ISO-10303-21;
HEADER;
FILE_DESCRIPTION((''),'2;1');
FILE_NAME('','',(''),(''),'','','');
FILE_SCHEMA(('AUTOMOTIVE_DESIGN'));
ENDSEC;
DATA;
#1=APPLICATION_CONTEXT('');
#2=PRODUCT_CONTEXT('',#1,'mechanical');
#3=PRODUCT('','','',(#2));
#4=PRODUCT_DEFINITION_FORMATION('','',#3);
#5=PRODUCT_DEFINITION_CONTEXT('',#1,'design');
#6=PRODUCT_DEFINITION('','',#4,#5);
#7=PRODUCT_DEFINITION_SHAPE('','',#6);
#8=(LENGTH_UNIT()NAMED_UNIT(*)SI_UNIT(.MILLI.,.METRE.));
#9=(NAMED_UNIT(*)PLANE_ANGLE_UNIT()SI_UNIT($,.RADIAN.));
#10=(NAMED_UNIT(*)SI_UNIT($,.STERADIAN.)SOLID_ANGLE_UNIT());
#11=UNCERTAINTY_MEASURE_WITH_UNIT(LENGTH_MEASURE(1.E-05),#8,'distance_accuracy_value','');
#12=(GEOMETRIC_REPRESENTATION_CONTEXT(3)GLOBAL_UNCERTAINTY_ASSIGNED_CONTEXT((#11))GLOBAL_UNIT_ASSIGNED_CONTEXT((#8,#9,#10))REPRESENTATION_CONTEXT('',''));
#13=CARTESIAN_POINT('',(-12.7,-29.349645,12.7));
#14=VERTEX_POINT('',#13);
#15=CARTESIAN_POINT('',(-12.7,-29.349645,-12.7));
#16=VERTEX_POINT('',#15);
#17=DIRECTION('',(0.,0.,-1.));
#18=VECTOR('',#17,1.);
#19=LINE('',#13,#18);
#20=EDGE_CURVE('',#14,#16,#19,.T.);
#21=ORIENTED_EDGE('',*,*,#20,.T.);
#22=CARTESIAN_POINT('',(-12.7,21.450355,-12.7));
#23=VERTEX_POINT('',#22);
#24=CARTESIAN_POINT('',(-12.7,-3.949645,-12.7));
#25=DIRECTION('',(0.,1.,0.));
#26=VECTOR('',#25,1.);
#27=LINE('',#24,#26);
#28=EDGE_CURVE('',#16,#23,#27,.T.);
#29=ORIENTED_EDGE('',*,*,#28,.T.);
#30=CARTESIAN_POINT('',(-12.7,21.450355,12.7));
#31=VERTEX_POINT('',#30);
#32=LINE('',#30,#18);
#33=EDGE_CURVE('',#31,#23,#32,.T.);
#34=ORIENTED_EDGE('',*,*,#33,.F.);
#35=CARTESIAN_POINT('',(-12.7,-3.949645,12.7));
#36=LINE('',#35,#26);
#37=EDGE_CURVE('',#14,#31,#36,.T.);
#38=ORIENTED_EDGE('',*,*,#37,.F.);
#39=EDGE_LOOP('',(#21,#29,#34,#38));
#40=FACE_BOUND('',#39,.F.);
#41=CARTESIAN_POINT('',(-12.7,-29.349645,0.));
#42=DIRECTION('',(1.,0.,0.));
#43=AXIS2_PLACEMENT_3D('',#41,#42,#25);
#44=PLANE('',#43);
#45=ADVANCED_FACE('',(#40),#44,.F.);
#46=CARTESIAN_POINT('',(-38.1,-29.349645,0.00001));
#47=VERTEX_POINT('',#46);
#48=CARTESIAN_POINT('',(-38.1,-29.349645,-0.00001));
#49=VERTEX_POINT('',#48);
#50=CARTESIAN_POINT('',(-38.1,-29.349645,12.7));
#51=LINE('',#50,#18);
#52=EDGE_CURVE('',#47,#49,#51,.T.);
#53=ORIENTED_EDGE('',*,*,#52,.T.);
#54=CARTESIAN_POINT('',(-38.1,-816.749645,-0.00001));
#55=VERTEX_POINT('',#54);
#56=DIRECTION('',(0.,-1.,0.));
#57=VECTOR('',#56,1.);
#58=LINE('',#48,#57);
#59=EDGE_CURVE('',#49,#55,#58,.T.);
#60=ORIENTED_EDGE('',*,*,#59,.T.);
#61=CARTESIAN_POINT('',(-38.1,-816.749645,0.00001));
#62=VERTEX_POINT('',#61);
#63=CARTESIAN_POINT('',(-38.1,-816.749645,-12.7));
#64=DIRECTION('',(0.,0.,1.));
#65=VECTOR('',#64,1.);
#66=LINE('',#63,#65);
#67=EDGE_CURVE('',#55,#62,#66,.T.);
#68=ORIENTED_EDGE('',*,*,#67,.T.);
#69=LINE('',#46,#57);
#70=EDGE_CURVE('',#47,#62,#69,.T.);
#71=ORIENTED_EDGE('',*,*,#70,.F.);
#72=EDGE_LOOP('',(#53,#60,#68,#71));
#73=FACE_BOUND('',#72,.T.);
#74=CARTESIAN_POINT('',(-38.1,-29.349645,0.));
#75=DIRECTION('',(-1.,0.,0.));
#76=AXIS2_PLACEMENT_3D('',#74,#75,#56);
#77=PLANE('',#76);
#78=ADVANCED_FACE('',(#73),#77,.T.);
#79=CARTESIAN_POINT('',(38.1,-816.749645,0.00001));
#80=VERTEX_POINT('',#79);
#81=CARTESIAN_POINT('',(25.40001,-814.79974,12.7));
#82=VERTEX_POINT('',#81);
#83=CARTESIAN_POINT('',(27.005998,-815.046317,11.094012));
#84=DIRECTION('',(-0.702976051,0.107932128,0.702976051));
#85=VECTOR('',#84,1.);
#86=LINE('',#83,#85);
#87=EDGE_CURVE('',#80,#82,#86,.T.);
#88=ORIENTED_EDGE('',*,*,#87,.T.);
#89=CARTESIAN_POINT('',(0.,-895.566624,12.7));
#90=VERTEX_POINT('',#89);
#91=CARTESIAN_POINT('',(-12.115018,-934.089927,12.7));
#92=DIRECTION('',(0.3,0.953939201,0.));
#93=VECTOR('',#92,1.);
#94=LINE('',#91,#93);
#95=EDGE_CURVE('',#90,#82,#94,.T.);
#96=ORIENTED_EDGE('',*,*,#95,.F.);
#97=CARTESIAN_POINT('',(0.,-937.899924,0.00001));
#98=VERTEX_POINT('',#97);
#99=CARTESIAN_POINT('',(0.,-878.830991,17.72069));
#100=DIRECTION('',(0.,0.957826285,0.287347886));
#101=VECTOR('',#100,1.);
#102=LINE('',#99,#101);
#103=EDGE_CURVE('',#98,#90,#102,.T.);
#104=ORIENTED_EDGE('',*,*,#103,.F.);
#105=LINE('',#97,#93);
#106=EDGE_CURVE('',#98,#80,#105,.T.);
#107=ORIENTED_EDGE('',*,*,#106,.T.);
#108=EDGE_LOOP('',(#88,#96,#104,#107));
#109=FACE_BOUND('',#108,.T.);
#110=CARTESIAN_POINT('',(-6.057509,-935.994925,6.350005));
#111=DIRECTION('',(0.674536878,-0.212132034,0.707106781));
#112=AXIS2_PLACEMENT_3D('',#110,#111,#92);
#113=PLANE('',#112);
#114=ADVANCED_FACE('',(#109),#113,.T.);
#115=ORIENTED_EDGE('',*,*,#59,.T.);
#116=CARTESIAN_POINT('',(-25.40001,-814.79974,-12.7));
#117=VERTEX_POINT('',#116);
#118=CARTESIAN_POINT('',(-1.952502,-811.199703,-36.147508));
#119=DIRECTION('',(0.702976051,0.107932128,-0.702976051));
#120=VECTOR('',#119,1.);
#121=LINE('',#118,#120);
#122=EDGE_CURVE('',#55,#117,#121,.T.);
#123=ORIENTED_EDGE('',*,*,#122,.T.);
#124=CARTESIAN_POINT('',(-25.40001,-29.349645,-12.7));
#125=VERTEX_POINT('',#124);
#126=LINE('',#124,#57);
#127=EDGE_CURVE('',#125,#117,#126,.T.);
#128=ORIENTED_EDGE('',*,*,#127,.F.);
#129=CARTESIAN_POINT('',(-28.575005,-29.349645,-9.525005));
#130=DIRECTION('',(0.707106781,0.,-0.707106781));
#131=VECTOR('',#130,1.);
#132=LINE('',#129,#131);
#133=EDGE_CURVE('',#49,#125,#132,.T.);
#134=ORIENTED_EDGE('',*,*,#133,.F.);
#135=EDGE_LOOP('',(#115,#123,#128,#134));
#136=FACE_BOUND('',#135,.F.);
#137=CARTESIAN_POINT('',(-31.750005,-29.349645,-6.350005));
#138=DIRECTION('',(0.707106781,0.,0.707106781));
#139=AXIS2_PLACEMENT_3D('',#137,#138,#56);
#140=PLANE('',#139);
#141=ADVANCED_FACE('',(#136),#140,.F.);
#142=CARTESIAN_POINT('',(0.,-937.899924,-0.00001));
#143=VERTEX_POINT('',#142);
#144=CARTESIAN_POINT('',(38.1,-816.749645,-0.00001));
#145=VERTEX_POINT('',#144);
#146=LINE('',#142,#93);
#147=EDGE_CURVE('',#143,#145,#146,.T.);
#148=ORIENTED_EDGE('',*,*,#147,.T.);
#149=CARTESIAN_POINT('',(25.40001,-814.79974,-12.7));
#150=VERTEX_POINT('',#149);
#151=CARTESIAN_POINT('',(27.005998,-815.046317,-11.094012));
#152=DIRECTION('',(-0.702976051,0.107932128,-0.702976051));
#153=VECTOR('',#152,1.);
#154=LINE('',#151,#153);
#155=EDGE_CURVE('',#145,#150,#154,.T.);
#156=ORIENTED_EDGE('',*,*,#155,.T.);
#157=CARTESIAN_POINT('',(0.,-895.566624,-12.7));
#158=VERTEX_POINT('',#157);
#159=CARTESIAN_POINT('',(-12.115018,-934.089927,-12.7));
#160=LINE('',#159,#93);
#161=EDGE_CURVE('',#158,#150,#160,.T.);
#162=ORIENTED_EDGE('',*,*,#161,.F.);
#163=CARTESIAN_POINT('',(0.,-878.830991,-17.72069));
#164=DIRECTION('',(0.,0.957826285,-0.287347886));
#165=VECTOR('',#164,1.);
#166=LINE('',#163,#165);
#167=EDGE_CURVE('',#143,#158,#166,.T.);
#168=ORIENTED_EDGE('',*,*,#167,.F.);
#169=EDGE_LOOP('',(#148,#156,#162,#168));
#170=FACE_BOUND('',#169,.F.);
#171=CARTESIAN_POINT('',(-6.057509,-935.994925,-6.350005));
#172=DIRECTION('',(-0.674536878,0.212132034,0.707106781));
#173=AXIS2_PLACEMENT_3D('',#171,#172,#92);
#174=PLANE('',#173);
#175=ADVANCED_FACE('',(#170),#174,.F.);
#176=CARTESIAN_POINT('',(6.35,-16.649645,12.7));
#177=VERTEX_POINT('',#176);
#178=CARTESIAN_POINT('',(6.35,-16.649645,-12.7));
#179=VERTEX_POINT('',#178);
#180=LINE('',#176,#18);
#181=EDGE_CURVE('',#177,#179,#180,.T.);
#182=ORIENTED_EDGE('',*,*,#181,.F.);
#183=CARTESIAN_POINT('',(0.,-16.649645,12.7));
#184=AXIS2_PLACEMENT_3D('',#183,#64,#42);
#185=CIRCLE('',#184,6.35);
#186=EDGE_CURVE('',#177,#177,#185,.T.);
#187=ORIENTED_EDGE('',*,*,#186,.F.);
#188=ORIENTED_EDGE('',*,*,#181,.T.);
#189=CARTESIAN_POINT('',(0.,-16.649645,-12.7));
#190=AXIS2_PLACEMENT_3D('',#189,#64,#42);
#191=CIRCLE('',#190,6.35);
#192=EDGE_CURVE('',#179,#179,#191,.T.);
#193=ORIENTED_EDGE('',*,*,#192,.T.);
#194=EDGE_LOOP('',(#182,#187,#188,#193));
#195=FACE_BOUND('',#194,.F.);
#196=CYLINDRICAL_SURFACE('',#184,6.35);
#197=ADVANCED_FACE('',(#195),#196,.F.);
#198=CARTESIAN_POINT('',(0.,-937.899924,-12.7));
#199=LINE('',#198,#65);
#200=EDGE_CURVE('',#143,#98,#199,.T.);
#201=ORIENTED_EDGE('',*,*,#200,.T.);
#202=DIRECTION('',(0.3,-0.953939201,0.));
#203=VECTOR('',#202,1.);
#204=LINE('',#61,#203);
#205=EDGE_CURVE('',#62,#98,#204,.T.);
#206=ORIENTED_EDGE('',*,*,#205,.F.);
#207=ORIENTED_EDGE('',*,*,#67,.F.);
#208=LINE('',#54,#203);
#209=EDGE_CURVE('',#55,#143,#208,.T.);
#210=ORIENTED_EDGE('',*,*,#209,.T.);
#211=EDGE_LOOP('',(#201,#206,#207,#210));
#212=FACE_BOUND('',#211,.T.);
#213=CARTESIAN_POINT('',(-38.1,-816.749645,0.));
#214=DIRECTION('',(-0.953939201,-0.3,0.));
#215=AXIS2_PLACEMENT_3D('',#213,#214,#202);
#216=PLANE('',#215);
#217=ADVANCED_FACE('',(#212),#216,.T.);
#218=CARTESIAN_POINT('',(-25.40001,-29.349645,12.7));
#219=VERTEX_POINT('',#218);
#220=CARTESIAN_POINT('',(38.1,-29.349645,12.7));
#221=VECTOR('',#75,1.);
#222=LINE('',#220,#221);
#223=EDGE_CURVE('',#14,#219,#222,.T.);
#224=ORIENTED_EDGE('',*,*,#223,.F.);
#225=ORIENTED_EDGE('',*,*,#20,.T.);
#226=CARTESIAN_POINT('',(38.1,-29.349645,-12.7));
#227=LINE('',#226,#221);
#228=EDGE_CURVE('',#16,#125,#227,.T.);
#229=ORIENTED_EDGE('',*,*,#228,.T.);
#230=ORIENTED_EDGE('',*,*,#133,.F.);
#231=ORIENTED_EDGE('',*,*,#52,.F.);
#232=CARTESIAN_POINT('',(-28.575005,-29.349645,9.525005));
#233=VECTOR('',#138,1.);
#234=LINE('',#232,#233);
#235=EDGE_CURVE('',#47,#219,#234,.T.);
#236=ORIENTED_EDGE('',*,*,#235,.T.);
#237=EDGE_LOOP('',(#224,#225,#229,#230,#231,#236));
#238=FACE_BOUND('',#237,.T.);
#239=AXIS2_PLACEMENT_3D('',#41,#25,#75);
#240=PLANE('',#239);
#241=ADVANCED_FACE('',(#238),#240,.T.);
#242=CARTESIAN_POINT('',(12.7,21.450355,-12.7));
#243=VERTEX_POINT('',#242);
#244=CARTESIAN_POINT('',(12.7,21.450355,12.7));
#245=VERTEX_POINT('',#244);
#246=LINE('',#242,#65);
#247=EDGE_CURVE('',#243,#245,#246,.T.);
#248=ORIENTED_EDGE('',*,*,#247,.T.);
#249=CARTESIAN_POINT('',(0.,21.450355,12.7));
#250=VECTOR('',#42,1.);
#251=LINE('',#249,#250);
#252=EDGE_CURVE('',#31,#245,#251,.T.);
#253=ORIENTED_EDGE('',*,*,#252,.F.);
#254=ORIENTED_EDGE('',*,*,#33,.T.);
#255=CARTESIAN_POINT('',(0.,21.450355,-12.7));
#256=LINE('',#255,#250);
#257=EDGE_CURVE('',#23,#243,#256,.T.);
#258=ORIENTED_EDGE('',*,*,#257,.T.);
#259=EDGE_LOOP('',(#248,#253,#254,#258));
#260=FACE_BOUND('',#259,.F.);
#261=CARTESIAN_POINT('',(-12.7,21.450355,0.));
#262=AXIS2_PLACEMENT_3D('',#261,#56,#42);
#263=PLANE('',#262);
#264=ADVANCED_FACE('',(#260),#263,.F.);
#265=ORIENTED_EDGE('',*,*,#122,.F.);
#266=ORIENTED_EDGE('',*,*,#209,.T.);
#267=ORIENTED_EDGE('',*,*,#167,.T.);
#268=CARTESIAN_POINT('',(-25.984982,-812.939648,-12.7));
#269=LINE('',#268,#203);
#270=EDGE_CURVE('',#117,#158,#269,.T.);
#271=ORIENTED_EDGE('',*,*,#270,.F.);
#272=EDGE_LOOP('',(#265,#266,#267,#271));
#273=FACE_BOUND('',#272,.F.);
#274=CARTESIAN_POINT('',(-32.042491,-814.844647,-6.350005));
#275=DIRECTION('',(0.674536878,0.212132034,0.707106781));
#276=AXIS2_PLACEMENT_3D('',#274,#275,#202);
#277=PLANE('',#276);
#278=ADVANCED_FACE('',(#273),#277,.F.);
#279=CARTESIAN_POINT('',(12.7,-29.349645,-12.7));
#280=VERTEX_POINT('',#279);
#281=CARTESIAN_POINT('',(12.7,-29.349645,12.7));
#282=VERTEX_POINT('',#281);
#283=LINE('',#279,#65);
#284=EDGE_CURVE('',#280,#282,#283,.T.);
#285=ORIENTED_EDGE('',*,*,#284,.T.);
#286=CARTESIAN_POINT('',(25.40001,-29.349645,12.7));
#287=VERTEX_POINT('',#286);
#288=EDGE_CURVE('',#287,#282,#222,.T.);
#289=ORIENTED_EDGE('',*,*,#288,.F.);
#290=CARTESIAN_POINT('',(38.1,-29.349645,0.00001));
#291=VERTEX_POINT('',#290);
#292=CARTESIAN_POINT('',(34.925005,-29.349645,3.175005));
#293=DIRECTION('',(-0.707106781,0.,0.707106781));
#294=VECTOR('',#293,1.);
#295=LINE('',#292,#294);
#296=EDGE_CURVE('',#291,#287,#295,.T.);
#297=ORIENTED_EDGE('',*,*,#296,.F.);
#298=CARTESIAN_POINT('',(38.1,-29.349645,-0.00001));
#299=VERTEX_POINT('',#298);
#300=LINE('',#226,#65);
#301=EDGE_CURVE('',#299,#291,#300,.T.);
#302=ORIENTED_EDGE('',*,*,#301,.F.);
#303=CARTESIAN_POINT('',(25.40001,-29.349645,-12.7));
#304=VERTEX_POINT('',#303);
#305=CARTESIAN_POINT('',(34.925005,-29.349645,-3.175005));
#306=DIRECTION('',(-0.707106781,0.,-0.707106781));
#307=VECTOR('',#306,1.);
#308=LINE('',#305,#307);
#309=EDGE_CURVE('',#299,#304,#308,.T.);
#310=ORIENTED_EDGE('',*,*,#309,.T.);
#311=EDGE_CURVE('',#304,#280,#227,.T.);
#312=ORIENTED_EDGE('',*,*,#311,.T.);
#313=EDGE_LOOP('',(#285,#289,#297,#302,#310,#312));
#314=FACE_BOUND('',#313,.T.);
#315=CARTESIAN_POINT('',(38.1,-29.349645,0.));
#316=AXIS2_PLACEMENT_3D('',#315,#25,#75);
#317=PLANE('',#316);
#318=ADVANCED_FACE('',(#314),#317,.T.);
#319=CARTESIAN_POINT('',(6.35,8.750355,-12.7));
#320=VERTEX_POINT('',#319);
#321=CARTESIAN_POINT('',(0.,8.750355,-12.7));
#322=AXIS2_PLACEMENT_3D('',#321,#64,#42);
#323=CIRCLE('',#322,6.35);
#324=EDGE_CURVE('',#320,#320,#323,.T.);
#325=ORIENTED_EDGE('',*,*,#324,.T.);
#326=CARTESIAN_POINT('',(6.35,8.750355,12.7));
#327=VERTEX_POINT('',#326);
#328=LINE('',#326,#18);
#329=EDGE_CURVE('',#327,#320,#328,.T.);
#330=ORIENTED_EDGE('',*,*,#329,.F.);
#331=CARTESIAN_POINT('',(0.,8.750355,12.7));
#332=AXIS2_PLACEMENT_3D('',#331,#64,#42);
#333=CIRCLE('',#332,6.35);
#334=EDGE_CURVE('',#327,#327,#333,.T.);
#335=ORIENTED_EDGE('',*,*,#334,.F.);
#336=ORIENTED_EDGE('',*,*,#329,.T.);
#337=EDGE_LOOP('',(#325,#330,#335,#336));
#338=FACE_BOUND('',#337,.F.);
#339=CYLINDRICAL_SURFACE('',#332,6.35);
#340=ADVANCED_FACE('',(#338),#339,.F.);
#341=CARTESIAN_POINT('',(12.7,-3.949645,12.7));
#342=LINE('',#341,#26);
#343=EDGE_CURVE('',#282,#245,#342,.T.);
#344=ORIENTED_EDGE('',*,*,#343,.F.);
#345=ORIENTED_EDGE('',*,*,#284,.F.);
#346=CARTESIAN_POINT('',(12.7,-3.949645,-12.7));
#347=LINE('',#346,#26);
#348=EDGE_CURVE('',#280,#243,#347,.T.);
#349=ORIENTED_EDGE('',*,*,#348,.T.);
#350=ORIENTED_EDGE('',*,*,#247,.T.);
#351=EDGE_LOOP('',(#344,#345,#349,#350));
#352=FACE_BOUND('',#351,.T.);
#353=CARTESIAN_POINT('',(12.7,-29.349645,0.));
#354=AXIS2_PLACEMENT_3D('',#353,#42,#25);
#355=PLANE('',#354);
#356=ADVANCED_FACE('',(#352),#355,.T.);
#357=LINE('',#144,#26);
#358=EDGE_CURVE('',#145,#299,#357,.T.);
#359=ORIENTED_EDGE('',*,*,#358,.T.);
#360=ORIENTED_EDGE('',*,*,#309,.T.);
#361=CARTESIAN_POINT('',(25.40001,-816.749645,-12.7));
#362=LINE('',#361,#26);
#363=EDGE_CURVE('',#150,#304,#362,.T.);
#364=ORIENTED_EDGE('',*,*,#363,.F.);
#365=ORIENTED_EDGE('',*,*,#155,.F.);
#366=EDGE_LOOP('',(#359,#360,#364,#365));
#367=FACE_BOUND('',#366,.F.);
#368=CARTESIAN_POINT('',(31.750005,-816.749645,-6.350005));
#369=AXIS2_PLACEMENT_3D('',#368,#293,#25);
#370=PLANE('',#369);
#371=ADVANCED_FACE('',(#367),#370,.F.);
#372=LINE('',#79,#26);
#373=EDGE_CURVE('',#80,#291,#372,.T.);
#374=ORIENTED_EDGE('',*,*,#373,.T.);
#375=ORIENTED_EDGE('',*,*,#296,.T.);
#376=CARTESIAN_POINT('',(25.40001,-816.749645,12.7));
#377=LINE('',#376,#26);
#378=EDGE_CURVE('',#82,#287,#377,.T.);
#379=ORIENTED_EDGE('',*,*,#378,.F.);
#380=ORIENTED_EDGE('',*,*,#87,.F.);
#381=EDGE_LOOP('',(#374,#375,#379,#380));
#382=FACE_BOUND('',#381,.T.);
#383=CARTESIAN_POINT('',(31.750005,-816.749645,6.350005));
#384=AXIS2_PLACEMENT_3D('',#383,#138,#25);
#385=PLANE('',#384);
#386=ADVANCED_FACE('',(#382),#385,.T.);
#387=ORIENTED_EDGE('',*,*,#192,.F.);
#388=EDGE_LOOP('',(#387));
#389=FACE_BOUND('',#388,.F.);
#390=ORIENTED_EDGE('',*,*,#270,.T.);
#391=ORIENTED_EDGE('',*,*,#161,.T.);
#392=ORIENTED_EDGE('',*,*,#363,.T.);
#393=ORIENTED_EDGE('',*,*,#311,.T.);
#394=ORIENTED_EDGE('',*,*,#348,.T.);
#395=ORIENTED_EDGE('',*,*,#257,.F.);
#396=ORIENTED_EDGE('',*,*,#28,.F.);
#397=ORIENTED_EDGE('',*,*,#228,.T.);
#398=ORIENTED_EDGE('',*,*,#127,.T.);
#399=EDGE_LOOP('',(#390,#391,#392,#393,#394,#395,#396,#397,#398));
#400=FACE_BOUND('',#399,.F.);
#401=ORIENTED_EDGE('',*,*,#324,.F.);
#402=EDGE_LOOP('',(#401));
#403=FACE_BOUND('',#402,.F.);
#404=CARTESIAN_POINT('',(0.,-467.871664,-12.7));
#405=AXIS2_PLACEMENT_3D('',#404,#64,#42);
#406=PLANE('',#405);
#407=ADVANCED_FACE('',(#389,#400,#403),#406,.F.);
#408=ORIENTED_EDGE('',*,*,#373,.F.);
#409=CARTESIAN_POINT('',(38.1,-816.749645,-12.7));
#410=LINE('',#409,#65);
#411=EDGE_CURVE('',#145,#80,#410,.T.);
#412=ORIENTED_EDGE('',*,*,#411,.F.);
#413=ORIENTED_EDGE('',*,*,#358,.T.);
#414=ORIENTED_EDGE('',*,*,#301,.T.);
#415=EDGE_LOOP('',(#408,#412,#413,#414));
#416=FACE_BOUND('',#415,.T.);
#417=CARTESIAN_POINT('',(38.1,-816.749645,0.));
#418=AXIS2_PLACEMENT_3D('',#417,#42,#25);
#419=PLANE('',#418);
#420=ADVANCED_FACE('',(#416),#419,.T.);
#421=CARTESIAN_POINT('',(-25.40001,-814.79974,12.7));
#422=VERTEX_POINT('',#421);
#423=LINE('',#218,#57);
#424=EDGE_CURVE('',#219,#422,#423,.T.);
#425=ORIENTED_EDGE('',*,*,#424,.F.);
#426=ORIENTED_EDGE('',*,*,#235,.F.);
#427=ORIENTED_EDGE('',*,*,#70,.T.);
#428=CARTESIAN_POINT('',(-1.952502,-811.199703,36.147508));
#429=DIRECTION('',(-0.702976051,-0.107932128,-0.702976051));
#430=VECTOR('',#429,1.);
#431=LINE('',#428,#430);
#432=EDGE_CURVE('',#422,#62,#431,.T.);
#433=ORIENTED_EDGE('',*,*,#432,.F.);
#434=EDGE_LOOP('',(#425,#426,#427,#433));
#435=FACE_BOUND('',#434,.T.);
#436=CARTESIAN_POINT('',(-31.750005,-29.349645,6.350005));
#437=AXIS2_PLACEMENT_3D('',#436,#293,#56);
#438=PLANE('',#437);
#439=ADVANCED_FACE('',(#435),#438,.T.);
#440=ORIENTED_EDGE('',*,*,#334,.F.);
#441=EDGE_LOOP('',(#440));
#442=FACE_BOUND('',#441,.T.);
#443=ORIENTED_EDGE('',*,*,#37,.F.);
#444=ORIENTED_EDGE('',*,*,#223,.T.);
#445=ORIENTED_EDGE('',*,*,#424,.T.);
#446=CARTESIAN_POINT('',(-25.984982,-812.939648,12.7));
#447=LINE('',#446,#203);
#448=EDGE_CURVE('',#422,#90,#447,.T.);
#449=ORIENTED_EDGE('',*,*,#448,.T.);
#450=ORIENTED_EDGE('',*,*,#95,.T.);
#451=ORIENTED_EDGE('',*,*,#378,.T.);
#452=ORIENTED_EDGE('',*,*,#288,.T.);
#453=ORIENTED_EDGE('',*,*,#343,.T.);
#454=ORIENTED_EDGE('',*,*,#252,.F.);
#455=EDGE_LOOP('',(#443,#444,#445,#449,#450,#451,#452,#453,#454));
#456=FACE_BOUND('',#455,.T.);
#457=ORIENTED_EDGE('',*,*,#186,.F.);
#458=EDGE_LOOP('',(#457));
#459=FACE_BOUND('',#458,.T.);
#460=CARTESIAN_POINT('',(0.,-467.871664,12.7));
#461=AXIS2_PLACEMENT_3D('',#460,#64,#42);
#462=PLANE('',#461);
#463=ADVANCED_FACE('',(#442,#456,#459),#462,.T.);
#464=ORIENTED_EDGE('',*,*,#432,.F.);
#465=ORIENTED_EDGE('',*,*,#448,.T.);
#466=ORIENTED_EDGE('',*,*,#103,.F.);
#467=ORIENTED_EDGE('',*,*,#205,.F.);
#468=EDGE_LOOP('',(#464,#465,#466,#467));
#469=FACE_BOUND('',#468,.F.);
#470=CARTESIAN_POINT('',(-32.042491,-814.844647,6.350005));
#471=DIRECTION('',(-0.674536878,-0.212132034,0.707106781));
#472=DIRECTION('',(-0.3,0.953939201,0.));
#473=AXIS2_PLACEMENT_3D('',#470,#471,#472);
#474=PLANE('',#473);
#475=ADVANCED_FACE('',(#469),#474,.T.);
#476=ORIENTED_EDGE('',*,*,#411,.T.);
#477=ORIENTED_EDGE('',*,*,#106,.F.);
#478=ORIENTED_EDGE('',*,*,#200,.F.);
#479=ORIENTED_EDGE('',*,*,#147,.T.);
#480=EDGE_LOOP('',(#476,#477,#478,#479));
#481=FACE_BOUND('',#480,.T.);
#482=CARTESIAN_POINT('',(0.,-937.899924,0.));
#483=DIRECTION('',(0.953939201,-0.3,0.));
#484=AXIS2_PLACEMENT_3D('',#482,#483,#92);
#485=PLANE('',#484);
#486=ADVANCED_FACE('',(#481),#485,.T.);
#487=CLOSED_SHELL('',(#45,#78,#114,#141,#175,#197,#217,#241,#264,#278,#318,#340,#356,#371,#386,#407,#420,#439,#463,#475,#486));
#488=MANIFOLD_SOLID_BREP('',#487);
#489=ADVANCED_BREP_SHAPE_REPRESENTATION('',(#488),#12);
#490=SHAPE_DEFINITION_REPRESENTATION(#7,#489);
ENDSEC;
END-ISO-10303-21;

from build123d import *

# Parameters (mm, degrees)
F0_W     = 25.4
F0_H     = 50.8
F1_DEPTH = 12.7
F2_SIZE  = 12.69999
F3_R     = 6.35
F4_DEPTH = 25.401


# Not quite as in the source:
# - a fillet or chamfer is up to 0.001 mm smaller than in the source, because OpenCascade refuses the exact size


with BuildPart() as f1:
    # F0 (on Top) → F1 (new body, symmetric)
    with BuildSketch(Plane.XY):
        Polygon((-12.7, -29.3496451829), (-38.1, -29.3496451829), (-38.1, -816.7496451829), (0, -937.8999237629), (38.1, -816.7496451829), (38.1, -29.3496451829), (12.7, -29.3496451829), align=None)
        with Locations((0, -3.9496451829)):
            Rectangle(F0_W, F0_H)
    extrude(amount=F1_DEPTH, both=True)

    # F2 (size 12.7 in the source; OpenCascade refuses exactly that, so slightly less here)
    f2_edges = [f1.edges().sort_by_distance(p)[0] for p in [
        (38.1, -423.049645, 12.7),
        (19.05, -877.324784, 12.7),
        (-19.05, -877.324784, 12.7),
        (-38.1, -423.049645, 12.7),
        (19.05, -877.324784, -12.7),
        (-38.1, -423.049645, -12.7),
        (-19.05, -877.324784, -12.7),
        (38.1, -423.049645, -12.7),
    ]]
    chamfer(f2_edges, length=F2_SIZE)

    # F3 (on face) → F4 (cut, through all)
    with BuildSketch(Plane.XY.offset(12.7)):
        with Locations((0, 8.7503548171)):
            Circle(F3_R)
        with Locations((0, -16.6496451829)):
            Circle(F3_R)
    extrude(amount=-F4_DEPTH, mode=Mode.SUBTRACT)


solid = f1.part
